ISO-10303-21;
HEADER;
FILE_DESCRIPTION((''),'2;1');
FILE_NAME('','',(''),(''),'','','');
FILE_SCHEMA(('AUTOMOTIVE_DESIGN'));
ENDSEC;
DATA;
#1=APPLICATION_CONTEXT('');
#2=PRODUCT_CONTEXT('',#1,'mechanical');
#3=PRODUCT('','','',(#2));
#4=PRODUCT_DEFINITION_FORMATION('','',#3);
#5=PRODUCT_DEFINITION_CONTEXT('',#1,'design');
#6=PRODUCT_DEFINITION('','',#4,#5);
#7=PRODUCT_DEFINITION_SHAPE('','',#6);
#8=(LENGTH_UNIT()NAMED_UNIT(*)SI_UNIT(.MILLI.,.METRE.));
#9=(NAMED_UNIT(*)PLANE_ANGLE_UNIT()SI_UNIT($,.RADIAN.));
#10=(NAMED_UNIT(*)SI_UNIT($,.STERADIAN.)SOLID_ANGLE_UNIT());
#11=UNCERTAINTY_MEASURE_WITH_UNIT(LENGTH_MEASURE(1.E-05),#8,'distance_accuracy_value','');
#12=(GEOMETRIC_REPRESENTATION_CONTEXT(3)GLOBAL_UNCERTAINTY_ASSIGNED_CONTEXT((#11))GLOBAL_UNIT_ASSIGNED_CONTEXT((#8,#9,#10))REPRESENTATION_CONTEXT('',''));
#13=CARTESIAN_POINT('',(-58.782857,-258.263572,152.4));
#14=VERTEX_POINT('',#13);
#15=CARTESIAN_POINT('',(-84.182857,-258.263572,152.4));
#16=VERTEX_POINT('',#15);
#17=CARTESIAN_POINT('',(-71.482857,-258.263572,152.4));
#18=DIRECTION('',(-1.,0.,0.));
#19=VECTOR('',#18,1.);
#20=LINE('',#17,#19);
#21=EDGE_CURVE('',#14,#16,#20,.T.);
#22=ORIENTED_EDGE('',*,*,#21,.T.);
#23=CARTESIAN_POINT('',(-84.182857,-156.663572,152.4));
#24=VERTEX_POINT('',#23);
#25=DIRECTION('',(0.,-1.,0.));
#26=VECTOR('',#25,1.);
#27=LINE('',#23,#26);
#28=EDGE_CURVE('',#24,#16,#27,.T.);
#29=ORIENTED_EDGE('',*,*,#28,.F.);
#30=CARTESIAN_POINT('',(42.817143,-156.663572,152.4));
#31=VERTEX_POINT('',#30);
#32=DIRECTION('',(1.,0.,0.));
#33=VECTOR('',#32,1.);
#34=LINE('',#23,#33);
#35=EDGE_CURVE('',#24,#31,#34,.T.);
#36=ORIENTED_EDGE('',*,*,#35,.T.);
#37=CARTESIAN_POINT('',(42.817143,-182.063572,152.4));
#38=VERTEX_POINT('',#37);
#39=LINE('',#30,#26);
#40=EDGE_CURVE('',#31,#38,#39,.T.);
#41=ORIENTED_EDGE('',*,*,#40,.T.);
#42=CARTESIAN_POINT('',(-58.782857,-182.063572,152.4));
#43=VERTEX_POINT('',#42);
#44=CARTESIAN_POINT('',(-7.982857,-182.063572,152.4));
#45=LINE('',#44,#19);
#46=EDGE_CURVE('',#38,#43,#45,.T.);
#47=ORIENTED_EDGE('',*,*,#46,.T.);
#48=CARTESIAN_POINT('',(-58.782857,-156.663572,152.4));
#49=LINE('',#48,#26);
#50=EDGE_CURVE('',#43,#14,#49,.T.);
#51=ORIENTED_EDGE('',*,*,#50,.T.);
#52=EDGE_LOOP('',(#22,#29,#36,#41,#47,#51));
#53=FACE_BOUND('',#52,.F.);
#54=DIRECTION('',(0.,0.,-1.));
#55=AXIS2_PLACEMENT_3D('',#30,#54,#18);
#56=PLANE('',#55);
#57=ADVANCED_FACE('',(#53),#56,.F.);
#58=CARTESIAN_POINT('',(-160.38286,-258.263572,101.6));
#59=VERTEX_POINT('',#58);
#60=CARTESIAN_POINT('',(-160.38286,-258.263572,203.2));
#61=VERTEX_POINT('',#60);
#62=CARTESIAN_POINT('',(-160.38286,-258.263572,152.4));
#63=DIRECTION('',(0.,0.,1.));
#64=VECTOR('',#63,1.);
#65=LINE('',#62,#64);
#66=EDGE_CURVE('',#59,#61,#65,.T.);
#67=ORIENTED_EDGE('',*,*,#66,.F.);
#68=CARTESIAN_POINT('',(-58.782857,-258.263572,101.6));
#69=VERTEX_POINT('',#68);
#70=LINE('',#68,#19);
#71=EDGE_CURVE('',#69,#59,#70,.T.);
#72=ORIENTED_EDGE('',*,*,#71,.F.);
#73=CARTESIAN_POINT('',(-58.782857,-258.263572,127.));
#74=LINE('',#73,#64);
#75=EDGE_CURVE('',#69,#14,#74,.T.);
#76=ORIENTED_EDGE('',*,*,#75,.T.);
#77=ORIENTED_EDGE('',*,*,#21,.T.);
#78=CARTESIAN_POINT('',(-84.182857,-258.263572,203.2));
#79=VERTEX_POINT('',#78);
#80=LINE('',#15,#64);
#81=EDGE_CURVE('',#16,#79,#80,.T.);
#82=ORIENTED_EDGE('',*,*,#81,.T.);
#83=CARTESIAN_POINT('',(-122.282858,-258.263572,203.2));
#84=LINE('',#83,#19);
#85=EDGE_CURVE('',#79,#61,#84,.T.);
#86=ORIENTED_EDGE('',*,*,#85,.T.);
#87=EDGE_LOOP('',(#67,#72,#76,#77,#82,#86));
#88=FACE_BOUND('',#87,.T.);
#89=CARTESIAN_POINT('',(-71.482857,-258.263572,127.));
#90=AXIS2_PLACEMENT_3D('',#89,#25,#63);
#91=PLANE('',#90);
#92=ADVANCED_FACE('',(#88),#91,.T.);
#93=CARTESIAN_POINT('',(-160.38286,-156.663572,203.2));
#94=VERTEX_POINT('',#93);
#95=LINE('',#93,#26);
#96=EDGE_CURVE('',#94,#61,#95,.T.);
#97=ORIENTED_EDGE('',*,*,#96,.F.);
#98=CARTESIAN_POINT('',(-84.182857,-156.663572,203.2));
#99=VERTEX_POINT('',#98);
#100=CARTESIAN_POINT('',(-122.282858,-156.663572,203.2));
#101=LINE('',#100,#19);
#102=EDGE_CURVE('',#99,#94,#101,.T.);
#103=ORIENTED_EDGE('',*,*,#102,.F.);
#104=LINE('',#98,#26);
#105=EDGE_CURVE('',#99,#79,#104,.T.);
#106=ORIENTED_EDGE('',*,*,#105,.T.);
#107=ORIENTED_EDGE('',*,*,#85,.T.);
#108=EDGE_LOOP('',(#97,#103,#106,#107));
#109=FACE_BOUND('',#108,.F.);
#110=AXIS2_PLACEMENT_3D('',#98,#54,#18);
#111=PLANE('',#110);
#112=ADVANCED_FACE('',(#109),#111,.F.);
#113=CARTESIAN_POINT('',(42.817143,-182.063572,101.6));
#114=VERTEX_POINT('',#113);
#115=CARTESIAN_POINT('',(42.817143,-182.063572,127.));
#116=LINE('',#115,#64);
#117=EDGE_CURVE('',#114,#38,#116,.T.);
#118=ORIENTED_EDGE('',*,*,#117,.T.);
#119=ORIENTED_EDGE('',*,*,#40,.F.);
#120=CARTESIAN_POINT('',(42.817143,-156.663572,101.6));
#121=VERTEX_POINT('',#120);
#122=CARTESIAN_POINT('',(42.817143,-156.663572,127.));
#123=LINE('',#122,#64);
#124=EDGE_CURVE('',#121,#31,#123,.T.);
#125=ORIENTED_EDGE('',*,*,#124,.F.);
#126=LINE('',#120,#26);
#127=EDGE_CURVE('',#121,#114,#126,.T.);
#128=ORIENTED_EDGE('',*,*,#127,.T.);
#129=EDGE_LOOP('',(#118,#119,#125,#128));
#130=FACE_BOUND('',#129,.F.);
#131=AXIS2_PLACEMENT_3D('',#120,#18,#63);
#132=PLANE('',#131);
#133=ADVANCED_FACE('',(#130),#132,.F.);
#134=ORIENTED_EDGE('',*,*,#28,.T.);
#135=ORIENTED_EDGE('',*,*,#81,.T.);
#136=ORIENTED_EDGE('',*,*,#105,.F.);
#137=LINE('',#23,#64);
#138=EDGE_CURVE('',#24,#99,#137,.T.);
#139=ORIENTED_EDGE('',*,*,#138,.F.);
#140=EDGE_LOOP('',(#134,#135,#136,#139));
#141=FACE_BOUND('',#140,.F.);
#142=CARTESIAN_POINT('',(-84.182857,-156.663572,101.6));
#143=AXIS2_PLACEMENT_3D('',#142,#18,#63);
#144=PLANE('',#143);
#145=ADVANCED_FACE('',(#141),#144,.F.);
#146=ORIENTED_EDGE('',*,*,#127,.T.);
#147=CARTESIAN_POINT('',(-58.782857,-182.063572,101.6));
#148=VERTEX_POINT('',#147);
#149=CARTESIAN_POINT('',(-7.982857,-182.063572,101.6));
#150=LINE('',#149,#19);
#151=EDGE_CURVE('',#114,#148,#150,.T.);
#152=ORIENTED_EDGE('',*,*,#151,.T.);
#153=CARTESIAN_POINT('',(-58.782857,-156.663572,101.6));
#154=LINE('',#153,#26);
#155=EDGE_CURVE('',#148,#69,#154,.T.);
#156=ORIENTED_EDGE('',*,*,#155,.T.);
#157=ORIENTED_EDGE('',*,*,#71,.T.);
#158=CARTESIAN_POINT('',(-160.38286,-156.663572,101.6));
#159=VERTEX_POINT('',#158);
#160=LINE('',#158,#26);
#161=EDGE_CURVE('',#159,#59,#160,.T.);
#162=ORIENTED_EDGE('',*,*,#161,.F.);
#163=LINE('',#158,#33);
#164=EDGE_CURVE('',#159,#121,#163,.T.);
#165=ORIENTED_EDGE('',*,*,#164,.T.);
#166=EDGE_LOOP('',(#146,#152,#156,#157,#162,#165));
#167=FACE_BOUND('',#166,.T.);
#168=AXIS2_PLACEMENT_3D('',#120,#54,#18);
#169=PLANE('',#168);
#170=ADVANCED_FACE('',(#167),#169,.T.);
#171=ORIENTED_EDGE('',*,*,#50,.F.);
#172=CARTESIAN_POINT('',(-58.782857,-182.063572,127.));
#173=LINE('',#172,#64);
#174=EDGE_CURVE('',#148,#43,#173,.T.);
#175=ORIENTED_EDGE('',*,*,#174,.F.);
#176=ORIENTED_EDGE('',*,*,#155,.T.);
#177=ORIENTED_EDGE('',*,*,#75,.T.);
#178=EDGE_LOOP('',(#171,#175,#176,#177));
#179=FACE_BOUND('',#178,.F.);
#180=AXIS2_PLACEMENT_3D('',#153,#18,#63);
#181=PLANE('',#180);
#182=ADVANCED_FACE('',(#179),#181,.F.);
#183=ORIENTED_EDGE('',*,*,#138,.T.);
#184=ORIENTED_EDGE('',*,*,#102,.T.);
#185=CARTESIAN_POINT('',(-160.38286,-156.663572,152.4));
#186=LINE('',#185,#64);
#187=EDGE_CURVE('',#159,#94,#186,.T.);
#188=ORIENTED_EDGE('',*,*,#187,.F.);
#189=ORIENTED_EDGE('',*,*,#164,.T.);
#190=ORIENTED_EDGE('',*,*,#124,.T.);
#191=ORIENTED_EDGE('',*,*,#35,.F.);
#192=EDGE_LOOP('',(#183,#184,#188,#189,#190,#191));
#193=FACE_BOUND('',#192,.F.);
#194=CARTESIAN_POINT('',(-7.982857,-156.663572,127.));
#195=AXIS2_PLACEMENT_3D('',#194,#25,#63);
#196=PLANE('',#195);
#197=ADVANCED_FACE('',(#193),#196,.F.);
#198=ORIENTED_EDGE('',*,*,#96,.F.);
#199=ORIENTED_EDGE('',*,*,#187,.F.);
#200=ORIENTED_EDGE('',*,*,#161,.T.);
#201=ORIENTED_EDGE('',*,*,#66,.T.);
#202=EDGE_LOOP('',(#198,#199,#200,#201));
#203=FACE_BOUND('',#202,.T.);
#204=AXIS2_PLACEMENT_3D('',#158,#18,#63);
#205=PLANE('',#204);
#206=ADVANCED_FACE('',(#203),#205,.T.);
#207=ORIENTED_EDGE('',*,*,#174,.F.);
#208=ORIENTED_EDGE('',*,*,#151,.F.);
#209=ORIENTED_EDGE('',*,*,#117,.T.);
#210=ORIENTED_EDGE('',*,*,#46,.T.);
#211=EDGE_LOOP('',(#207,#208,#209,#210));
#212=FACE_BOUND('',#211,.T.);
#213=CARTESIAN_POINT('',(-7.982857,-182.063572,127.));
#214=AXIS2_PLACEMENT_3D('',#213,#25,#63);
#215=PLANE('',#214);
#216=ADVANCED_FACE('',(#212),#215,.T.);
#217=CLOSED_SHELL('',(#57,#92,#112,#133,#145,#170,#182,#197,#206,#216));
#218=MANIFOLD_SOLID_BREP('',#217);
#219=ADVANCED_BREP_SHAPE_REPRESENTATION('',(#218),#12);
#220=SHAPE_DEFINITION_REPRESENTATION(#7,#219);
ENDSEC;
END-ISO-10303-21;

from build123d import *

# Parameters (mm, degrees)
F0_W     = 101.6
F0_H     = 76.2000028044
F1_DEPTH = 101.6
F2_W     = 50.8
F2_H     = 25.4
F3_DEPTH = 101.6
F4_W     = 50.8
F4_H     = 101.6
F5_DEPTH = 25.4
F6_ANGLE = 90
F7_ANGLE = -90


# Not quite as in the source:
# - a feature names something its author has since deleted; it is built from what else it names


with BuildPart() as f1:
    # F0 (on Top) → F1 (new body)
    with BuildSketch(Plane.XY):
        with Locations((-7.9828569114, 8.4364293143)):
            Rectangle(F0_W, F0_H)
    extrude(amount=F1_DEPTH)

    # F2 (on Top) → F3 (join)
    with BuildSketch(Plane.XY):
        with Locations((-33.3828569114, -42.3635720879)):
            Rectangle(F2_W, F2_H)
    extrude(amount=F3_DEPTH)

    # F4 (on Top) → F5 (join)
    with BuildSketch(Plane.XY):
        with Locations((-33.3828569114, -105.8635720879)):
            Rectangle(F4_W, F4_H)
    extrude(amount=F5_DEPTH)


with BuildPart() as f1_1:
    # F6: moved
    add(f1.part.rotate(Axis((-58.7828569114, -4.2635706857, 101.6), (0, -1, 0)), F6_ANGLE))


with BuildPart() as f1_2:
    # F7: moved
    add(f1_1.part.rotate(Axis((42.8171430886, -156.6635720879, 127), (0, 0, -1)), F7_ANGLE))


solid = f1_2.part
